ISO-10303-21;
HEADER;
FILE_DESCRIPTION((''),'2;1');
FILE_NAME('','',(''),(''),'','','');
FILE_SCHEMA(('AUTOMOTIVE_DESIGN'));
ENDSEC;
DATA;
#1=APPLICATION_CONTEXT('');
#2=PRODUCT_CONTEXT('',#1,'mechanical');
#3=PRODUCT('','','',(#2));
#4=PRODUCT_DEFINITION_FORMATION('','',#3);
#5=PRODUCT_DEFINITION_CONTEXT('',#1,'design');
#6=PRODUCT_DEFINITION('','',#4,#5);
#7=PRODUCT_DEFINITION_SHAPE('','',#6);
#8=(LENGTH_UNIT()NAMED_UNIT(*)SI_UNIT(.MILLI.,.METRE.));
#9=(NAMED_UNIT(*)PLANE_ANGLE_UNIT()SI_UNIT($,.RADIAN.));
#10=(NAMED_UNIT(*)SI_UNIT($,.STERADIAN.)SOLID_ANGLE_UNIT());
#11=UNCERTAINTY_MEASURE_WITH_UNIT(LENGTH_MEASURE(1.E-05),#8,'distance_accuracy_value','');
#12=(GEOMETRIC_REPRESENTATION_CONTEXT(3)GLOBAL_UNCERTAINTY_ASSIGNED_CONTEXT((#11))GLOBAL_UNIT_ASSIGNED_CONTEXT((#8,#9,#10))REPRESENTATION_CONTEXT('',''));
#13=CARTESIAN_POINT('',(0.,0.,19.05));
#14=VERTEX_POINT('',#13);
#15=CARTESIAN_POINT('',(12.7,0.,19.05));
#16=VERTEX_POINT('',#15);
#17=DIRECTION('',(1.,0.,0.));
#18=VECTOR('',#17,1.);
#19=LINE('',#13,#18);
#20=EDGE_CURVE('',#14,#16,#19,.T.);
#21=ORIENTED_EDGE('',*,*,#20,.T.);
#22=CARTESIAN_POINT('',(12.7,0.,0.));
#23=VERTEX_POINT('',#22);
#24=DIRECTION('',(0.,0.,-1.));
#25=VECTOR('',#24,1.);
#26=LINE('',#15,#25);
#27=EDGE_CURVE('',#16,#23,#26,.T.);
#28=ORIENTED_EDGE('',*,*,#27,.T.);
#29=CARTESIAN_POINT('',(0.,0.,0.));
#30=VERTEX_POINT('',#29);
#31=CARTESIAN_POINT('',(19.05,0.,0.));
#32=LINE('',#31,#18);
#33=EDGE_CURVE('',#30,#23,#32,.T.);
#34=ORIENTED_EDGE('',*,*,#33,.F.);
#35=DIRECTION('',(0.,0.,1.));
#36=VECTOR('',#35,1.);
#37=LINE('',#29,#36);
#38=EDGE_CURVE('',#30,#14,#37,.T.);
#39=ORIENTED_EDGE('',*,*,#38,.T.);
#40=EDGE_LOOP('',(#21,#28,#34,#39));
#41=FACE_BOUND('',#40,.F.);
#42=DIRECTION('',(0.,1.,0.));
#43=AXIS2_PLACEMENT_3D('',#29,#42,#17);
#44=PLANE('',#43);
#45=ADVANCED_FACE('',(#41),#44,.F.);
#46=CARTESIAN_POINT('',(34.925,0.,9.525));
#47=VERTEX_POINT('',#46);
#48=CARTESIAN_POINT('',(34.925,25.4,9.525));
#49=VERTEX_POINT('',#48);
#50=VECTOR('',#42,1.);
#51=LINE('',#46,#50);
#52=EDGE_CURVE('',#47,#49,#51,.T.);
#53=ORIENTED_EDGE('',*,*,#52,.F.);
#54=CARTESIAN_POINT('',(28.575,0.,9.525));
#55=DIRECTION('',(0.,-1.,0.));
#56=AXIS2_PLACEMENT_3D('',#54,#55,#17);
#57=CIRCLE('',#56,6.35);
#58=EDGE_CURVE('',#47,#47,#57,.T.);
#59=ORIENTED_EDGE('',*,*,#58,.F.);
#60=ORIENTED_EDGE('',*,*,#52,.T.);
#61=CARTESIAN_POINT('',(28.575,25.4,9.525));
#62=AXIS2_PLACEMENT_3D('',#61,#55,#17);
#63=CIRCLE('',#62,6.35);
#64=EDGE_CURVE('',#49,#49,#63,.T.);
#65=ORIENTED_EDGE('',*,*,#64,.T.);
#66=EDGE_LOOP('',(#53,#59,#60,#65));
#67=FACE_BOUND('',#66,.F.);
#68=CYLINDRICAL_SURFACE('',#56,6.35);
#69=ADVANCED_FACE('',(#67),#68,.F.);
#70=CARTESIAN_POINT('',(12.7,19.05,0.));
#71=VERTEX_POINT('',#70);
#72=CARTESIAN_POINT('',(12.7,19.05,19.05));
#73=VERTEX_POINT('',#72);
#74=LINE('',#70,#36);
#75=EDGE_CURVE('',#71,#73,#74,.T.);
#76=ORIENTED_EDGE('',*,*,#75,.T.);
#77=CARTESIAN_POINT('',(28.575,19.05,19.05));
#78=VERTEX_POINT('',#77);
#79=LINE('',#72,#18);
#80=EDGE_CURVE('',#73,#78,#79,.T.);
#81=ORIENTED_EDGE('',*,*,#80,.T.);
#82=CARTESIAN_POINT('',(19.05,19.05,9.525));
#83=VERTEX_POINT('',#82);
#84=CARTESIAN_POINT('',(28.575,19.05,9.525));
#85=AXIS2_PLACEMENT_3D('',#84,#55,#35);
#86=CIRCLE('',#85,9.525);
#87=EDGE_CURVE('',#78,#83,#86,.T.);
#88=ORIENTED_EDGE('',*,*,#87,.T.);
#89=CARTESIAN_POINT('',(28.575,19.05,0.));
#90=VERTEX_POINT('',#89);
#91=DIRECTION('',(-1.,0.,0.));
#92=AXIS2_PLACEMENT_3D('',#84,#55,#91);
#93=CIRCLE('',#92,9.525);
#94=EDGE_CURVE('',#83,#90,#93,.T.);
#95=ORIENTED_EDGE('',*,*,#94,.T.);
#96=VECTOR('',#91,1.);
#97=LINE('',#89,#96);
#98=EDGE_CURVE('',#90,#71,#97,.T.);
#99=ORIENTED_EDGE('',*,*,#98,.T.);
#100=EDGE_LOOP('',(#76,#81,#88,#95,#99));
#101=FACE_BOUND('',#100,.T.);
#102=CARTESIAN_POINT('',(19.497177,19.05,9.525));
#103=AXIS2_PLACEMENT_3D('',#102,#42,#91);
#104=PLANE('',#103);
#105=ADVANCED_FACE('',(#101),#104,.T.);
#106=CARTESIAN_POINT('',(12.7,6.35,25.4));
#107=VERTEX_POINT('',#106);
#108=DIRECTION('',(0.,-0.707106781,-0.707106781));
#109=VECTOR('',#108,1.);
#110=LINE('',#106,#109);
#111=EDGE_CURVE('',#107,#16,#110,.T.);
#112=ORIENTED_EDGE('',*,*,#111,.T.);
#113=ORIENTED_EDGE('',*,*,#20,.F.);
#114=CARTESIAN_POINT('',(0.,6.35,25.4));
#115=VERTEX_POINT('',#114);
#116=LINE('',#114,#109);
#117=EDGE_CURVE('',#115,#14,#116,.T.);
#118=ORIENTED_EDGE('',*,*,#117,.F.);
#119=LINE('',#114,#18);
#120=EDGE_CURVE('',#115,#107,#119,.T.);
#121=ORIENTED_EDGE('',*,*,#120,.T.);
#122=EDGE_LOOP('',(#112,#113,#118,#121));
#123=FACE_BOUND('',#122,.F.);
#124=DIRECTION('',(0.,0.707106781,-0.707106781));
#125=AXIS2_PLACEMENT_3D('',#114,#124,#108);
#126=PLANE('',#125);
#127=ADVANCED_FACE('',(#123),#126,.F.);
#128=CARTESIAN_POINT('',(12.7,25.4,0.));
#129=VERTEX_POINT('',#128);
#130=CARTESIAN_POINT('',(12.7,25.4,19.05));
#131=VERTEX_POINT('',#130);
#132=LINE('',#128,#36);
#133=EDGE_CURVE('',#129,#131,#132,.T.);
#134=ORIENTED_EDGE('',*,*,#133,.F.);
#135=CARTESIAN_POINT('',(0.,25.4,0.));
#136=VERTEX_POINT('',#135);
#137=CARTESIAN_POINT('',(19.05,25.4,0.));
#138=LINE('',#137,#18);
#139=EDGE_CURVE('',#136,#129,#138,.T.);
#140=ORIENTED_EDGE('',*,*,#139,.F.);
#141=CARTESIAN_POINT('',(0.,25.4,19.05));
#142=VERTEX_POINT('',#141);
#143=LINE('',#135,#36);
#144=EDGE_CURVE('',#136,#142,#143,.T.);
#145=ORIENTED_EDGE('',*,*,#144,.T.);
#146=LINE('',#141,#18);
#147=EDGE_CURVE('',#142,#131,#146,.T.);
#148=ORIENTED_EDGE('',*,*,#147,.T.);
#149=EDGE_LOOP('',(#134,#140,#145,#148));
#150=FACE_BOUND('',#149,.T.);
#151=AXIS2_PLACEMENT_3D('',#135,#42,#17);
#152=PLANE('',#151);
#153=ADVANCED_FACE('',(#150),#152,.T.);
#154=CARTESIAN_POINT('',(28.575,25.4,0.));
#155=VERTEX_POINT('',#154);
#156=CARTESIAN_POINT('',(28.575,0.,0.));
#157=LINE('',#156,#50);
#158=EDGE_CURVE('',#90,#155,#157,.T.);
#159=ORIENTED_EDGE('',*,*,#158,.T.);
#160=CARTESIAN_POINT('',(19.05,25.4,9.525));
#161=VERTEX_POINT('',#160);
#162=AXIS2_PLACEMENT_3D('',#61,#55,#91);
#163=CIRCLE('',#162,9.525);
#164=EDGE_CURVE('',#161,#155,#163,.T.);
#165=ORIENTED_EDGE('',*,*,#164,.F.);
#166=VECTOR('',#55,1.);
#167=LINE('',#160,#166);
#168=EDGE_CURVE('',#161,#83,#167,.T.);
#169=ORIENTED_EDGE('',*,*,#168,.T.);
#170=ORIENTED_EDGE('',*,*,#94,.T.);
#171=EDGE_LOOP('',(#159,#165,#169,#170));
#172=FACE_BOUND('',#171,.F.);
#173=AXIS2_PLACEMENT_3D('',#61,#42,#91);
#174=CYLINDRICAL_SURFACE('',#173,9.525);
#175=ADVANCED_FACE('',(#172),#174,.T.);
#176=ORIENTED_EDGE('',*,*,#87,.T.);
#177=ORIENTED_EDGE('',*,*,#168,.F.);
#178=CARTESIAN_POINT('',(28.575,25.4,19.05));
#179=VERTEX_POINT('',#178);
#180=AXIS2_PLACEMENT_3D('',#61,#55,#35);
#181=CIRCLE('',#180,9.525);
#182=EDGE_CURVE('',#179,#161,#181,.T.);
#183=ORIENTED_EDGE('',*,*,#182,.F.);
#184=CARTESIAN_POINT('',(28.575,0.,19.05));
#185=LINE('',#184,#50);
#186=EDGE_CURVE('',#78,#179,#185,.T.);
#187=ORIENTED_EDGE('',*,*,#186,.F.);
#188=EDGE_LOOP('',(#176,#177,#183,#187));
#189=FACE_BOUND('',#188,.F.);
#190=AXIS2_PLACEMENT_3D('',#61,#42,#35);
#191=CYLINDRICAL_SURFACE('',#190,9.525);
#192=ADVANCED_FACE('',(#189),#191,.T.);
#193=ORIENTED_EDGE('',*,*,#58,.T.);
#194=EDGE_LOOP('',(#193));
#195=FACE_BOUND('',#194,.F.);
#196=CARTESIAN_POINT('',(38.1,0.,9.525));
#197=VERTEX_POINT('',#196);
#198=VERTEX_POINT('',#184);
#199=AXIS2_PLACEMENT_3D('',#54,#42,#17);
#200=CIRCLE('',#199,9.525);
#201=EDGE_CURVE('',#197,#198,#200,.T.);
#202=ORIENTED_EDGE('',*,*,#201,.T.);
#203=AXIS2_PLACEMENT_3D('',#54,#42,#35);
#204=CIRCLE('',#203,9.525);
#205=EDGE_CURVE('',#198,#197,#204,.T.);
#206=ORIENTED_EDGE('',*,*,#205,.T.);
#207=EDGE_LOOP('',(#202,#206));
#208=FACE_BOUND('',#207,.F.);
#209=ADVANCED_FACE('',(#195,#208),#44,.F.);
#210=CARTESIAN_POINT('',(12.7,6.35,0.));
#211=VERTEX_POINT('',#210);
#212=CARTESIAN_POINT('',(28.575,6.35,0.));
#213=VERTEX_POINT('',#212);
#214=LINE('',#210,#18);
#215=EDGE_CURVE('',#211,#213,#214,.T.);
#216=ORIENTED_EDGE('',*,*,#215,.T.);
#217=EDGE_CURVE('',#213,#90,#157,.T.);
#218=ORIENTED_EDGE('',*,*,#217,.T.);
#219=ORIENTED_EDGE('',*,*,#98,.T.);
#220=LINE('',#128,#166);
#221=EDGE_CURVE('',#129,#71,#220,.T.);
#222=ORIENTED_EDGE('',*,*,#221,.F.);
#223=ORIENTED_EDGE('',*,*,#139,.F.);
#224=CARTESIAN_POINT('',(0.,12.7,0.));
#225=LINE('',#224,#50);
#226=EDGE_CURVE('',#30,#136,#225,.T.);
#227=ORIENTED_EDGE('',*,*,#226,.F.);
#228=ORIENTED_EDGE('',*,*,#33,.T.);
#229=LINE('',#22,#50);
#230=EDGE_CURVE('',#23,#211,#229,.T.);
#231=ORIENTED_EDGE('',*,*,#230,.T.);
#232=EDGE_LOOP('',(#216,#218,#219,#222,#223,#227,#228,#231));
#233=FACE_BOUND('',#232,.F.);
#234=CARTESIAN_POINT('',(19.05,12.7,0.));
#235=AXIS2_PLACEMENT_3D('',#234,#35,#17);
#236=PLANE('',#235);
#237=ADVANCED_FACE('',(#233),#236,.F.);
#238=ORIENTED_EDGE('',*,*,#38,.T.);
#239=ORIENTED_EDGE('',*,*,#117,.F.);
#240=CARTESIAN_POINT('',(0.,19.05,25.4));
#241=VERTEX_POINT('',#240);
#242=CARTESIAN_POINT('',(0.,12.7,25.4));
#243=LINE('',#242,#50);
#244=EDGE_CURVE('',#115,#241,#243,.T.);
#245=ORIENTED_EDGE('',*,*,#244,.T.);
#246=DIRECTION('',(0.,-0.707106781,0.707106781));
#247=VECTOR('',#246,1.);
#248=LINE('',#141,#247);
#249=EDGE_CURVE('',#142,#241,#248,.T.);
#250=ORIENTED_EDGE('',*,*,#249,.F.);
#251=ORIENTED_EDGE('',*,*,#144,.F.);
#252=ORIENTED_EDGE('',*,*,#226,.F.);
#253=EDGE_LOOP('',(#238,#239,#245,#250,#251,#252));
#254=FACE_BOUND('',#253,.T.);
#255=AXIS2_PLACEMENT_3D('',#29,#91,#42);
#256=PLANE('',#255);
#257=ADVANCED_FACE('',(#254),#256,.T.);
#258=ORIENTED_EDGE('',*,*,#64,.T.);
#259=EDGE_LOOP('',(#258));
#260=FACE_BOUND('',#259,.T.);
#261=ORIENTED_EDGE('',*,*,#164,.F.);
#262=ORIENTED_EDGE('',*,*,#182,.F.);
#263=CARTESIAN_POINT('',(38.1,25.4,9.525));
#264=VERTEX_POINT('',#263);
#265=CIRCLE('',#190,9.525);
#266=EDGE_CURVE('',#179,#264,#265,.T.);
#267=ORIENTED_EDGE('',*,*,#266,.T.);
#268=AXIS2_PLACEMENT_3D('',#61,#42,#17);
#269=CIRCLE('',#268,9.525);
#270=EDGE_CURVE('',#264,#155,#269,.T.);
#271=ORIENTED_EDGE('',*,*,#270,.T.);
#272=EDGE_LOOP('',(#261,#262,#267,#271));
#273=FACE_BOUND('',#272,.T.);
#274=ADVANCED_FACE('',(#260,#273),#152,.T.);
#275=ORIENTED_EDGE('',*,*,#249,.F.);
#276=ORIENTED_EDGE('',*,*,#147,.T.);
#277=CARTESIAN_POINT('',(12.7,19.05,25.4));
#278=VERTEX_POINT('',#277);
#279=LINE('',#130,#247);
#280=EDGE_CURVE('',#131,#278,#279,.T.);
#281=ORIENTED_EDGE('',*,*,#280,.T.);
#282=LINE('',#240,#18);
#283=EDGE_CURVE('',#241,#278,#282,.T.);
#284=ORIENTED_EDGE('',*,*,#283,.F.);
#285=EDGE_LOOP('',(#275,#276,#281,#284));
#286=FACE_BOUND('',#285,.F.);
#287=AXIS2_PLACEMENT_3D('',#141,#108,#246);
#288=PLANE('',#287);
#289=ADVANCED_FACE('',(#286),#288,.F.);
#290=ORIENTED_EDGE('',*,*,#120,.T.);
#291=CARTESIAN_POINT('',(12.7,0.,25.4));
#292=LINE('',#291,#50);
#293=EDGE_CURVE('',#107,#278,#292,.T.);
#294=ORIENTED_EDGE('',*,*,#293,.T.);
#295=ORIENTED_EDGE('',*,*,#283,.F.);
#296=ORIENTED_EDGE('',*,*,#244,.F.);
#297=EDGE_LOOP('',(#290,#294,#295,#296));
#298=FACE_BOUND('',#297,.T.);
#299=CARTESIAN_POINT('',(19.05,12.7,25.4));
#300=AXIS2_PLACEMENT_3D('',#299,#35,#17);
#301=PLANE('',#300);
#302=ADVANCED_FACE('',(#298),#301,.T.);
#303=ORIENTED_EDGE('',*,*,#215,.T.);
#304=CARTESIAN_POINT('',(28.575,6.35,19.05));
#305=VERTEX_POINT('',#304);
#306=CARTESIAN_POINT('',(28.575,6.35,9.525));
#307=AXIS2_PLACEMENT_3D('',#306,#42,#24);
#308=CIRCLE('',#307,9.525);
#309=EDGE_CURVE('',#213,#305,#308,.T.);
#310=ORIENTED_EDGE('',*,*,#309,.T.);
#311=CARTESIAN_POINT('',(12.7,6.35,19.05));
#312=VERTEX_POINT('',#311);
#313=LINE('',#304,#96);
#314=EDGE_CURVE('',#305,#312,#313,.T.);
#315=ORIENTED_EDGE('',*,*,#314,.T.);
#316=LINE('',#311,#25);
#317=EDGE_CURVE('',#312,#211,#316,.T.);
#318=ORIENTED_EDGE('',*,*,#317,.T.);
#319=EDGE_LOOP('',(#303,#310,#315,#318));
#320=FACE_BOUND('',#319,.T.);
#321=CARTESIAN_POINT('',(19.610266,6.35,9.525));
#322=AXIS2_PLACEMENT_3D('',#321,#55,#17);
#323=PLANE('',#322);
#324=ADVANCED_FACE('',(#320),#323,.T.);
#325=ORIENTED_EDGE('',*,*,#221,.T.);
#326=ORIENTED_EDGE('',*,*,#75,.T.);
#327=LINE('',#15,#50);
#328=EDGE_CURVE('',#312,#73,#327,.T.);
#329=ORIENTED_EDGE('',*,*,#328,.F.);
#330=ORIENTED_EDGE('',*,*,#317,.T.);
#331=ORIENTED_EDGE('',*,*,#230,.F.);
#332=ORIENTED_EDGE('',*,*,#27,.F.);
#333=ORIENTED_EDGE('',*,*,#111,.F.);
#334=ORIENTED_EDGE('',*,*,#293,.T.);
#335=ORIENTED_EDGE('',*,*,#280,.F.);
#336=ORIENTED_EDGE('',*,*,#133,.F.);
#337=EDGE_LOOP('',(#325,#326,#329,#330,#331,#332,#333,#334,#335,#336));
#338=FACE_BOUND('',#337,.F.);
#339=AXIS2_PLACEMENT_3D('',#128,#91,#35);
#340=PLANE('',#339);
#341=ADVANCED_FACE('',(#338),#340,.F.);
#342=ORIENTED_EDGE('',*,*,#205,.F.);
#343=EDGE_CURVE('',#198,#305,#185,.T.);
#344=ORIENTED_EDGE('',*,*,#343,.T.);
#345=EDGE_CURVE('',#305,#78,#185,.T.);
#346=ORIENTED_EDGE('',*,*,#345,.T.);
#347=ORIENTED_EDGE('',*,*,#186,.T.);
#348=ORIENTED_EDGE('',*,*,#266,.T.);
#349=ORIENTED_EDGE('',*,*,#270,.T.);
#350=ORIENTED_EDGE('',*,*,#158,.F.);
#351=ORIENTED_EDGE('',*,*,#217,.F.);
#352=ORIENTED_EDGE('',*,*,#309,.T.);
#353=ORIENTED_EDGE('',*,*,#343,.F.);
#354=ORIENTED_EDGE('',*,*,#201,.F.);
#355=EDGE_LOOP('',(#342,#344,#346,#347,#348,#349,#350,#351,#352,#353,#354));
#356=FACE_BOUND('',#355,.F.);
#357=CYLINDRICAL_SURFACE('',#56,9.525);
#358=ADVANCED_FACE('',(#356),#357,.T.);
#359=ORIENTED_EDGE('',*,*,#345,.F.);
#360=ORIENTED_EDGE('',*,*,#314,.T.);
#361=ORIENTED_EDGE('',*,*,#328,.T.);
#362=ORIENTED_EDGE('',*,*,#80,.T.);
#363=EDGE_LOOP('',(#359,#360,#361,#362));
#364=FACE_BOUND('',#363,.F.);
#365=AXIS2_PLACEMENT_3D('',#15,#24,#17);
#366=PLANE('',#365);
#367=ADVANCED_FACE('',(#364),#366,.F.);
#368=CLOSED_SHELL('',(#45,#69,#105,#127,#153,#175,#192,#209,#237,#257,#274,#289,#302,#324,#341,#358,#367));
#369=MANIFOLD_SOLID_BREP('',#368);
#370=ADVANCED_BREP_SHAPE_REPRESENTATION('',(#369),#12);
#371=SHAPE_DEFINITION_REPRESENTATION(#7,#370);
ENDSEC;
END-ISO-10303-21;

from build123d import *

# Parameters (mm, degrees)
F0_W     = 38.1
F0_H     = 25.4
F1_DEPTH = 25.4
F3_DEPTH = 12.7
F5_DEPTH = 25.4
F6_DEPTH = 6.35
F4_R     = 6.35
F7_DEPTH = 25.4
F9_DEPTH = 6.35


with BuildPart() as f1:
    # F0 (on Top) → F1 (new body)
    with BuildSketch(Plane.XY):
        with Locations((19.05, 12.7)):
            Rectangle(F0_W, F0_H)
    extrude(amount=F1_DEPTH)

    # F2 (on face) → F3 (cut)
    with BuildSketch(Plane(origin=(0, 0, 0), x_dir=(0, -1, 0), z_dir=(-1, 0, 0))):
        Polygon((-19.05, 25.4), (-25.4, 25.4), (-25.4, 19.05), align=None)
        Polygon((0, 19.05), (0, 25.4), (-6.35, 25.4), align=None)
    extrude(amount=-F3_DEPTH, mode=Mode.SUBTRACT)

    # F4 (on face) → F5 (cut)
    with BuildSketch(Plane.XZ):
        with BuildLine():
            ThreePointArc((28.575, 19.05), (35.3101920908, 16.2601920908), (38.1, 9.525))
            Line((38.1, 9.525), (38.1, 25.4))
            Line((38.1, 25.4), (12.7, 25.4))
            Line((12.7, 25.4), (12.7, 19.05))
            Line((12.7, 19.05), (28.575, 19.05))
        make_face()
        with BuildLine():
            Line((38.1, 0), (38.1, 9.525))
            ThreePointArc((38.1, 9.525), (35.3101920908, 2.7898079092), (28.575, 0))
            Line((28.575, 0), (38.1, 0))
        make_face()
    extrude(amount=-F5_DEPTH, mode=Mode.SUBTRACT)

    # F4 (on face) → F6 (cut)
    with BuildSketch(Plane.XZ):
        with BuildLine():
            ThreePointArc((28.575, 0), (19.05, 9.525), (28.575, 19.05))
            Line((28.575, 19.05), (12.7, 19.05))
            Line((12.7, 19.05), (12.7, 0))
            Line((12.7, 0), (28.575, 0))
        make_face()
    extrude(amount=-F6_DEPTH, mode=Mode.SUBTRACT)

    # F4 (on face) → F7 (cut)
    with BuildSketch(Plane.XZ):
        with Locations((28.575, 9.525)):
            Circle(F4_R)
    extrude(amount=-F7_DEPTH, mode=Mode.SUBTRACT)

    # F8 (on face) → F9 (cut)
    with BuildSketch(Plane(origin=(0, 25.4, 0), x_dir=(-1, 0, 0), z_dir=(0, 1, 0))):
        with BuildLine():
            ThreePointArc((-28.575, 19.05), (-21.8398079092, 16.2601920908), (-19.05, 9.525))
            ThreePointArc((-19.05, 9.525), (-21.8398079092, 2.7898079092), (-28.575, 0))
            Line((-28.575, 0), (-12.7, 0))
            Line((-12.7, 0), (-12.7, 19.05))
            Line((-12.7, 19.05), (-28.575, 19.05))
        make_face()
    extrude(amount=-F9_DEPTH, mode=Mode.SUBTRACT)


solid = f1.part
